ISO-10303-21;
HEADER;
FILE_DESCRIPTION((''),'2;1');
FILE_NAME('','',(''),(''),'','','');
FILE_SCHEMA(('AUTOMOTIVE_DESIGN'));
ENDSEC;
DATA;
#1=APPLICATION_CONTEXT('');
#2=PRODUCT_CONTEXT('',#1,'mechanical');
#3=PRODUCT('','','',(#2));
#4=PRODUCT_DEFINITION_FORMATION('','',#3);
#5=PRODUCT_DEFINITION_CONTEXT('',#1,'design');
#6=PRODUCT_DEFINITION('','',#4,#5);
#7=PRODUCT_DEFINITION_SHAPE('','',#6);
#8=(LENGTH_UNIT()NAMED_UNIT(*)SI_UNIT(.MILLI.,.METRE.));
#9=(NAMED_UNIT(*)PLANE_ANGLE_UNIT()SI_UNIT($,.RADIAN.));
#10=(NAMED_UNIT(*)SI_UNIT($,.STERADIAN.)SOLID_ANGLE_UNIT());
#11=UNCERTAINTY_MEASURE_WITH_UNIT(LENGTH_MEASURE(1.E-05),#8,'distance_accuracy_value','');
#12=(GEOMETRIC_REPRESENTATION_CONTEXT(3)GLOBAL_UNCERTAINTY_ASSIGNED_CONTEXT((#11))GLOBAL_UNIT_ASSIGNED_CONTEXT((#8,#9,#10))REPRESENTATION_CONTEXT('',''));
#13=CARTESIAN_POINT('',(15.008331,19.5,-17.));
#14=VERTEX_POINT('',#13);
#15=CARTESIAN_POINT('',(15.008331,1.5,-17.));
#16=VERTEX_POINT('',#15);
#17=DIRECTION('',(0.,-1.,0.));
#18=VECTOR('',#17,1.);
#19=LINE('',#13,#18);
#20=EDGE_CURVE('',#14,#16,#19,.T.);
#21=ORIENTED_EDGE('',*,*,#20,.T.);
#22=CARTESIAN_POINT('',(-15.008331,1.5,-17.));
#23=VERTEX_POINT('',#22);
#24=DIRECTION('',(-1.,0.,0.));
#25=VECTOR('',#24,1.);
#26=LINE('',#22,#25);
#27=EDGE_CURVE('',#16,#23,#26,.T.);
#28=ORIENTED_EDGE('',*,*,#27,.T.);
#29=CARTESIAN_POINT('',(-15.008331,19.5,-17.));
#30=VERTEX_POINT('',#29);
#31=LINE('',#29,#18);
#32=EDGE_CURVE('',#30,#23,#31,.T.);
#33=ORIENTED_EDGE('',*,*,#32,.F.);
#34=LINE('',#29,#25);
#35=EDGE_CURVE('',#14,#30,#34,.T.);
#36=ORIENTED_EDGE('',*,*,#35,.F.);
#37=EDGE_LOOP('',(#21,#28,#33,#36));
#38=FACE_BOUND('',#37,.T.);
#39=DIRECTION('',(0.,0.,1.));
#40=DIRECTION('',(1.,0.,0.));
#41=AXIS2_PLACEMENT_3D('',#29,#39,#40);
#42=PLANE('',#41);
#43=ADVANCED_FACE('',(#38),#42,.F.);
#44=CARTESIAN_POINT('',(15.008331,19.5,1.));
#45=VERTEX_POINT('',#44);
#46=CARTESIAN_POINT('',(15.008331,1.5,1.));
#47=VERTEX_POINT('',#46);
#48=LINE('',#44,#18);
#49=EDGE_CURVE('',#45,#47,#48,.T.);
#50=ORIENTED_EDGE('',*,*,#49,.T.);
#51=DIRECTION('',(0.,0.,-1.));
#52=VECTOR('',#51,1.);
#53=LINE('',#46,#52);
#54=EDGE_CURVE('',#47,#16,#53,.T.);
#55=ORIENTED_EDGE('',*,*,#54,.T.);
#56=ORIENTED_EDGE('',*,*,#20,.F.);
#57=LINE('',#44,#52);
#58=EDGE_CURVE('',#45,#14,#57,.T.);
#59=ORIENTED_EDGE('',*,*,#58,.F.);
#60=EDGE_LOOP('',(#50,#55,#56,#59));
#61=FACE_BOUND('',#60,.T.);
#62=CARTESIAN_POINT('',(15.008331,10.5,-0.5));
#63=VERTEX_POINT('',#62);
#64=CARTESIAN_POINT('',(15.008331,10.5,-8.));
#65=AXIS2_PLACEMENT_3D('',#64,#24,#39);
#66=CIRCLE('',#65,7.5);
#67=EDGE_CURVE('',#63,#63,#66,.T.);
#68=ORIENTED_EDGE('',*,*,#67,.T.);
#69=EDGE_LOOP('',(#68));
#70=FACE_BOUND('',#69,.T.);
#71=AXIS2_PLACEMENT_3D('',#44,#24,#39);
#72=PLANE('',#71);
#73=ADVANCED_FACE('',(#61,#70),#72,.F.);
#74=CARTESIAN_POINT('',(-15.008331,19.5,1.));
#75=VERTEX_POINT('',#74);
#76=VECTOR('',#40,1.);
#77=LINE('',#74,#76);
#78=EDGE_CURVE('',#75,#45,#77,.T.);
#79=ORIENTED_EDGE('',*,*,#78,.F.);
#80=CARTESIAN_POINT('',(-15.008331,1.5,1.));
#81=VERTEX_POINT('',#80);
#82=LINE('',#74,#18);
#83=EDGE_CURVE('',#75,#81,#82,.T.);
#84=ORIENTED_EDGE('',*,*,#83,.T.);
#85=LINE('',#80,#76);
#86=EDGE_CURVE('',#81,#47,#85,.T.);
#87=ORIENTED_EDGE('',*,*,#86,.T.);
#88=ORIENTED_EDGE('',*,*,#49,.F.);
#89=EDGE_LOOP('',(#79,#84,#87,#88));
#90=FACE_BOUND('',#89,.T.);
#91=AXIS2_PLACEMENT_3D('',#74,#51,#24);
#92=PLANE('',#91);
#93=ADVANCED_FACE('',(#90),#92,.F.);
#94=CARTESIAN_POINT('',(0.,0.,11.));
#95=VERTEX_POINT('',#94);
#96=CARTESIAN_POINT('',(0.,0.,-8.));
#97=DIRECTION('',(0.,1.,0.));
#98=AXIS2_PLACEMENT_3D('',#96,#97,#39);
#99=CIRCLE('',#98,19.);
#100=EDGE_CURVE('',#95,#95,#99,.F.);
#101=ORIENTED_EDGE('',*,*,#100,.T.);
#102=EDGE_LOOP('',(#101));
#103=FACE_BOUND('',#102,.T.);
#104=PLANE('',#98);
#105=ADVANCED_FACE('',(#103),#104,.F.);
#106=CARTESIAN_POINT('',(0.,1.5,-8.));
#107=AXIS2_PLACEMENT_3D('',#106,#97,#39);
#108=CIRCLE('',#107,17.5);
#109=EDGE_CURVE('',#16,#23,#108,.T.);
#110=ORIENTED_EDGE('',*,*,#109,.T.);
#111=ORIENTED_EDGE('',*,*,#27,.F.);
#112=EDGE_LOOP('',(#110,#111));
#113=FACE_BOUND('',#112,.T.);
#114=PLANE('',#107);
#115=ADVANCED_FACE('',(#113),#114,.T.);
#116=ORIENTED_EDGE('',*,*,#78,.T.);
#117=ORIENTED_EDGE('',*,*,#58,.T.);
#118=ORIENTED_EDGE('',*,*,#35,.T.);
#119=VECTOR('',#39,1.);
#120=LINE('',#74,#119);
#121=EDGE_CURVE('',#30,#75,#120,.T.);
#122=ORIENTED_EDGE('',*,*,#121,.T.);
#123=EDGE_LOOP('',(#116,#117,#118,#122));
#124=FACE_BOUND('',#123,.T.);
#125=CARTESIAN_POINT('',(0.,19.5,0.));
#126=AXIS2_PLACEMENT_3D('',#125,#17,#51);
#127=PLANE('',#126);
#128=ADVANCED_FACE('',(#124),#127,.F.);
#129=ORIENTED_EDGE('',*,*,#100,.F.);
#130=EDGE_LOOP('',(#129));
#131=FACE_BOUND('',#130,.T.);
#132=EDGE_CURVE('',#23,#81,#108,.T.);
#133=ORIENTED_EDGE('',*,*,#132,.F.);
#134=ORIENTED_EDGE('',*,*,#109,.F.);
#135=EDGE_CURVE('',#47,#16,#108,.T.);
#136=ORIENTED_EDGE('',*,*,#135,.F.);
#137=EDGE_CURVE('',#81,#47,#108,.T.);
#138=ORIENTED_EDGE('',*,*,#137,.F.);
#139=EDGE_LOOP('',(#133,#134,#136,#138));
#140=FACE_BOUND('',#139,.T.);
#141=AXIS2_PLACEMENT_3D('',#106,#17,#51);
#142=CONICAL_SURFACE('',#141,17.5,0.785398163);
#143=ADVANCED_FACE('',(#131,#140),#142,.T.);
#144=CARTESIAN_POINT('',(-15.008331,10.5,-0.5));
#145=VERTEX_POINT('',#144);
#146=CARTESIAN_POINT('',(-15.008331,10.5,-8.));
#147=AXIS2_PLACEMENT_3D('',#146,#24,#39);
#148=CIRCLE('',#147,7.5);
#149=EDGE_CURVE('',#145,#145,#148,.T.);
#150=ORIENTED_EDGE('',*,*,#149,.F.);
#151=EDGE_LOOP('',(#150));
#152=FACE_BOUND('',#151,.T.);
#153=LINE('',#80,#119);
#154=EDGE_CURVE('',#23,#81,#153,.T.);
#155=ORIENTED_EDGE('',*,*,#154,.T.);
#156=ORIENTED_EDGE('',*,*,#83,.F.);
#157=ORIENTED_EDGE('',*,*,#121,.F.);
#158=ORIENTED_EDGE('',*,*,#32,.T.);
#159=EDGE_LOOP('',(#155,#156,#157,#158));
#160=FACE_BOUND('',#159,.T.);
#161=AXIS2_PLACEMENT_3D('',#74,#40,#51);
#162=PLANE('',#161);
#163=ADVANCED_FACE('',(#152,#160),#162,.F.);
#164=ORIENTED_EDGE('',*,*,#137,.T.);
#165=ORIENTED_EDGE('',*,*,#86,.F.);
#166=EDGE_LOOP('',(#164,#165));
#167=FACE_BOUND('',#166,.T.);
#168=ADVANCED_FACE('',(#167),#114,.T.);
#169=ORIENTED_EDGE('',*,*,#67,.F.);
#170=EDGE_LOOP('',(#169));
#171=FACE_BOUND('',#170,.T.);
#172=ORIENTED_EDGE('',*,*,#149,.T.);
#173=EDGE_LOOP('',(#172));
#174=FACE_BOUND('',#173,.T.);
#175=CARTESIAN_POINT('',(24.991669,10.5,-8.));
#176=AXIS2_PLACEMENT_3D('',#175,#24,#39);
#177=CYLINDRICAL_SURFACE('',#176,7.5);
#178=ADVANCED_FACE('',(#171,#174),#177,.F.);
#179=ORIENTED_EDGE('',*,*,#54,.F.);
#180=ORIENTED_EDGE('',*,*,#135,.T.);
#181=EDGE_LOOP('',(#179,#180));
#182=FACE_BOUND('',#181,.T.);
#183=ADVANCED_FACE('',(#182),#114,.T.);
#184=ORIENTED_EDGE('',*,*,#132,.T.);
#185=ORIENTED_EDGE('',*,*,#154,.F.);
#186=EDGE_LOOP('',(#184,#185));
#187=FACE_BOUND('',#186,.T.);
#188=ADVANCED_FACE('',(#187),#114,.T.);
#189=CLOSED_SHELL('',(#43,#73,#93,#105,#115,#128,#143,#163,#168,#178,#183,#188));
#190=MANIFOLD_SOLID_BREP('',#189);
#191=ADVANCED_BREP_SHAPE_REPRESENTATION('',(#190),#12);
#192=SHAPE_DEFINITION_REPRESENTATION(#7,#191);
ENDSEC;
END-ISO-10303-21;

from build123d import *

# Parameters (mm, degrees)
SKETCH13_R              = 20
BOSS_EXTRUDE2_DEPTH     = 1.5
CHAMFER1_SIZE           = 2.5
ESQUISSE1_W             = 30.01666204
ESQUISSE1_H             = 18
BOSS_EXTRU_1_DEPTH      = 18
ESQUISSE2_R             = 7.5
ENL_V_MAT_EXTRU_1_DEPTH = 40


with BuildPart() as part:
    # Sketch13 → Boss-Extrude2 (new body)
    with BuildSketch(Plane(origin=(0, 0, 0), x_dir=(1, 0, 0), z_dir=(0, 1, 0))):
        with Locations(Location((0, 8, 0), (0, 0, 270))):
            Circle(SKETCH13_R)
    extrude(amount=BOSS_EXTRUDE2_DEPTH)

    # Chamfer1
    # the kernel refuses this chamfer: 2.5 mm, written as the material it takes off along each edge
    with BuildSketch(Plane(origin=(0, 1.5, -8), x_dir=(0, 0, 1), z_dir=(-1, 0, 0))) as chamfer1_piece_1:
        Polygon((20, -CHAMFER1_SIZE), (20 - CHAMFER1_SIZE, 0), (20, 0), align=None)
    revolve(axis=Axis((0, 1.5, -8), (0, 1, 0)), mode=Mode.SUBTRACT)

    # Esquisse1 → Boss.-Extru.1 (add)
    with BuildSketch(Plane(origin=(0, 1.5, 0), x_dir=(1, 0, 0), z_dir=(0, 1, 0))):
        with Locations((0, 8)):
            Rectangle(ESQUISSE1_W, ESQUISSE1_H)
    extrude(amount=BOSS_EXTRU_1_DEPTH)

    # Esquisse2 → Enlèv. mat.-Extru.1 (cut)
    with BuildSketch(Plane.ZY.offset(15.00833102)):
        with Locations((-8, 10.5)):
            Circle(ESQUISSE2_R)
    extrude(amount=-ENL_V_MAT_EXTRU_1_DEPTH, mode=Mode.SUBTRACT)


solid = part.part
